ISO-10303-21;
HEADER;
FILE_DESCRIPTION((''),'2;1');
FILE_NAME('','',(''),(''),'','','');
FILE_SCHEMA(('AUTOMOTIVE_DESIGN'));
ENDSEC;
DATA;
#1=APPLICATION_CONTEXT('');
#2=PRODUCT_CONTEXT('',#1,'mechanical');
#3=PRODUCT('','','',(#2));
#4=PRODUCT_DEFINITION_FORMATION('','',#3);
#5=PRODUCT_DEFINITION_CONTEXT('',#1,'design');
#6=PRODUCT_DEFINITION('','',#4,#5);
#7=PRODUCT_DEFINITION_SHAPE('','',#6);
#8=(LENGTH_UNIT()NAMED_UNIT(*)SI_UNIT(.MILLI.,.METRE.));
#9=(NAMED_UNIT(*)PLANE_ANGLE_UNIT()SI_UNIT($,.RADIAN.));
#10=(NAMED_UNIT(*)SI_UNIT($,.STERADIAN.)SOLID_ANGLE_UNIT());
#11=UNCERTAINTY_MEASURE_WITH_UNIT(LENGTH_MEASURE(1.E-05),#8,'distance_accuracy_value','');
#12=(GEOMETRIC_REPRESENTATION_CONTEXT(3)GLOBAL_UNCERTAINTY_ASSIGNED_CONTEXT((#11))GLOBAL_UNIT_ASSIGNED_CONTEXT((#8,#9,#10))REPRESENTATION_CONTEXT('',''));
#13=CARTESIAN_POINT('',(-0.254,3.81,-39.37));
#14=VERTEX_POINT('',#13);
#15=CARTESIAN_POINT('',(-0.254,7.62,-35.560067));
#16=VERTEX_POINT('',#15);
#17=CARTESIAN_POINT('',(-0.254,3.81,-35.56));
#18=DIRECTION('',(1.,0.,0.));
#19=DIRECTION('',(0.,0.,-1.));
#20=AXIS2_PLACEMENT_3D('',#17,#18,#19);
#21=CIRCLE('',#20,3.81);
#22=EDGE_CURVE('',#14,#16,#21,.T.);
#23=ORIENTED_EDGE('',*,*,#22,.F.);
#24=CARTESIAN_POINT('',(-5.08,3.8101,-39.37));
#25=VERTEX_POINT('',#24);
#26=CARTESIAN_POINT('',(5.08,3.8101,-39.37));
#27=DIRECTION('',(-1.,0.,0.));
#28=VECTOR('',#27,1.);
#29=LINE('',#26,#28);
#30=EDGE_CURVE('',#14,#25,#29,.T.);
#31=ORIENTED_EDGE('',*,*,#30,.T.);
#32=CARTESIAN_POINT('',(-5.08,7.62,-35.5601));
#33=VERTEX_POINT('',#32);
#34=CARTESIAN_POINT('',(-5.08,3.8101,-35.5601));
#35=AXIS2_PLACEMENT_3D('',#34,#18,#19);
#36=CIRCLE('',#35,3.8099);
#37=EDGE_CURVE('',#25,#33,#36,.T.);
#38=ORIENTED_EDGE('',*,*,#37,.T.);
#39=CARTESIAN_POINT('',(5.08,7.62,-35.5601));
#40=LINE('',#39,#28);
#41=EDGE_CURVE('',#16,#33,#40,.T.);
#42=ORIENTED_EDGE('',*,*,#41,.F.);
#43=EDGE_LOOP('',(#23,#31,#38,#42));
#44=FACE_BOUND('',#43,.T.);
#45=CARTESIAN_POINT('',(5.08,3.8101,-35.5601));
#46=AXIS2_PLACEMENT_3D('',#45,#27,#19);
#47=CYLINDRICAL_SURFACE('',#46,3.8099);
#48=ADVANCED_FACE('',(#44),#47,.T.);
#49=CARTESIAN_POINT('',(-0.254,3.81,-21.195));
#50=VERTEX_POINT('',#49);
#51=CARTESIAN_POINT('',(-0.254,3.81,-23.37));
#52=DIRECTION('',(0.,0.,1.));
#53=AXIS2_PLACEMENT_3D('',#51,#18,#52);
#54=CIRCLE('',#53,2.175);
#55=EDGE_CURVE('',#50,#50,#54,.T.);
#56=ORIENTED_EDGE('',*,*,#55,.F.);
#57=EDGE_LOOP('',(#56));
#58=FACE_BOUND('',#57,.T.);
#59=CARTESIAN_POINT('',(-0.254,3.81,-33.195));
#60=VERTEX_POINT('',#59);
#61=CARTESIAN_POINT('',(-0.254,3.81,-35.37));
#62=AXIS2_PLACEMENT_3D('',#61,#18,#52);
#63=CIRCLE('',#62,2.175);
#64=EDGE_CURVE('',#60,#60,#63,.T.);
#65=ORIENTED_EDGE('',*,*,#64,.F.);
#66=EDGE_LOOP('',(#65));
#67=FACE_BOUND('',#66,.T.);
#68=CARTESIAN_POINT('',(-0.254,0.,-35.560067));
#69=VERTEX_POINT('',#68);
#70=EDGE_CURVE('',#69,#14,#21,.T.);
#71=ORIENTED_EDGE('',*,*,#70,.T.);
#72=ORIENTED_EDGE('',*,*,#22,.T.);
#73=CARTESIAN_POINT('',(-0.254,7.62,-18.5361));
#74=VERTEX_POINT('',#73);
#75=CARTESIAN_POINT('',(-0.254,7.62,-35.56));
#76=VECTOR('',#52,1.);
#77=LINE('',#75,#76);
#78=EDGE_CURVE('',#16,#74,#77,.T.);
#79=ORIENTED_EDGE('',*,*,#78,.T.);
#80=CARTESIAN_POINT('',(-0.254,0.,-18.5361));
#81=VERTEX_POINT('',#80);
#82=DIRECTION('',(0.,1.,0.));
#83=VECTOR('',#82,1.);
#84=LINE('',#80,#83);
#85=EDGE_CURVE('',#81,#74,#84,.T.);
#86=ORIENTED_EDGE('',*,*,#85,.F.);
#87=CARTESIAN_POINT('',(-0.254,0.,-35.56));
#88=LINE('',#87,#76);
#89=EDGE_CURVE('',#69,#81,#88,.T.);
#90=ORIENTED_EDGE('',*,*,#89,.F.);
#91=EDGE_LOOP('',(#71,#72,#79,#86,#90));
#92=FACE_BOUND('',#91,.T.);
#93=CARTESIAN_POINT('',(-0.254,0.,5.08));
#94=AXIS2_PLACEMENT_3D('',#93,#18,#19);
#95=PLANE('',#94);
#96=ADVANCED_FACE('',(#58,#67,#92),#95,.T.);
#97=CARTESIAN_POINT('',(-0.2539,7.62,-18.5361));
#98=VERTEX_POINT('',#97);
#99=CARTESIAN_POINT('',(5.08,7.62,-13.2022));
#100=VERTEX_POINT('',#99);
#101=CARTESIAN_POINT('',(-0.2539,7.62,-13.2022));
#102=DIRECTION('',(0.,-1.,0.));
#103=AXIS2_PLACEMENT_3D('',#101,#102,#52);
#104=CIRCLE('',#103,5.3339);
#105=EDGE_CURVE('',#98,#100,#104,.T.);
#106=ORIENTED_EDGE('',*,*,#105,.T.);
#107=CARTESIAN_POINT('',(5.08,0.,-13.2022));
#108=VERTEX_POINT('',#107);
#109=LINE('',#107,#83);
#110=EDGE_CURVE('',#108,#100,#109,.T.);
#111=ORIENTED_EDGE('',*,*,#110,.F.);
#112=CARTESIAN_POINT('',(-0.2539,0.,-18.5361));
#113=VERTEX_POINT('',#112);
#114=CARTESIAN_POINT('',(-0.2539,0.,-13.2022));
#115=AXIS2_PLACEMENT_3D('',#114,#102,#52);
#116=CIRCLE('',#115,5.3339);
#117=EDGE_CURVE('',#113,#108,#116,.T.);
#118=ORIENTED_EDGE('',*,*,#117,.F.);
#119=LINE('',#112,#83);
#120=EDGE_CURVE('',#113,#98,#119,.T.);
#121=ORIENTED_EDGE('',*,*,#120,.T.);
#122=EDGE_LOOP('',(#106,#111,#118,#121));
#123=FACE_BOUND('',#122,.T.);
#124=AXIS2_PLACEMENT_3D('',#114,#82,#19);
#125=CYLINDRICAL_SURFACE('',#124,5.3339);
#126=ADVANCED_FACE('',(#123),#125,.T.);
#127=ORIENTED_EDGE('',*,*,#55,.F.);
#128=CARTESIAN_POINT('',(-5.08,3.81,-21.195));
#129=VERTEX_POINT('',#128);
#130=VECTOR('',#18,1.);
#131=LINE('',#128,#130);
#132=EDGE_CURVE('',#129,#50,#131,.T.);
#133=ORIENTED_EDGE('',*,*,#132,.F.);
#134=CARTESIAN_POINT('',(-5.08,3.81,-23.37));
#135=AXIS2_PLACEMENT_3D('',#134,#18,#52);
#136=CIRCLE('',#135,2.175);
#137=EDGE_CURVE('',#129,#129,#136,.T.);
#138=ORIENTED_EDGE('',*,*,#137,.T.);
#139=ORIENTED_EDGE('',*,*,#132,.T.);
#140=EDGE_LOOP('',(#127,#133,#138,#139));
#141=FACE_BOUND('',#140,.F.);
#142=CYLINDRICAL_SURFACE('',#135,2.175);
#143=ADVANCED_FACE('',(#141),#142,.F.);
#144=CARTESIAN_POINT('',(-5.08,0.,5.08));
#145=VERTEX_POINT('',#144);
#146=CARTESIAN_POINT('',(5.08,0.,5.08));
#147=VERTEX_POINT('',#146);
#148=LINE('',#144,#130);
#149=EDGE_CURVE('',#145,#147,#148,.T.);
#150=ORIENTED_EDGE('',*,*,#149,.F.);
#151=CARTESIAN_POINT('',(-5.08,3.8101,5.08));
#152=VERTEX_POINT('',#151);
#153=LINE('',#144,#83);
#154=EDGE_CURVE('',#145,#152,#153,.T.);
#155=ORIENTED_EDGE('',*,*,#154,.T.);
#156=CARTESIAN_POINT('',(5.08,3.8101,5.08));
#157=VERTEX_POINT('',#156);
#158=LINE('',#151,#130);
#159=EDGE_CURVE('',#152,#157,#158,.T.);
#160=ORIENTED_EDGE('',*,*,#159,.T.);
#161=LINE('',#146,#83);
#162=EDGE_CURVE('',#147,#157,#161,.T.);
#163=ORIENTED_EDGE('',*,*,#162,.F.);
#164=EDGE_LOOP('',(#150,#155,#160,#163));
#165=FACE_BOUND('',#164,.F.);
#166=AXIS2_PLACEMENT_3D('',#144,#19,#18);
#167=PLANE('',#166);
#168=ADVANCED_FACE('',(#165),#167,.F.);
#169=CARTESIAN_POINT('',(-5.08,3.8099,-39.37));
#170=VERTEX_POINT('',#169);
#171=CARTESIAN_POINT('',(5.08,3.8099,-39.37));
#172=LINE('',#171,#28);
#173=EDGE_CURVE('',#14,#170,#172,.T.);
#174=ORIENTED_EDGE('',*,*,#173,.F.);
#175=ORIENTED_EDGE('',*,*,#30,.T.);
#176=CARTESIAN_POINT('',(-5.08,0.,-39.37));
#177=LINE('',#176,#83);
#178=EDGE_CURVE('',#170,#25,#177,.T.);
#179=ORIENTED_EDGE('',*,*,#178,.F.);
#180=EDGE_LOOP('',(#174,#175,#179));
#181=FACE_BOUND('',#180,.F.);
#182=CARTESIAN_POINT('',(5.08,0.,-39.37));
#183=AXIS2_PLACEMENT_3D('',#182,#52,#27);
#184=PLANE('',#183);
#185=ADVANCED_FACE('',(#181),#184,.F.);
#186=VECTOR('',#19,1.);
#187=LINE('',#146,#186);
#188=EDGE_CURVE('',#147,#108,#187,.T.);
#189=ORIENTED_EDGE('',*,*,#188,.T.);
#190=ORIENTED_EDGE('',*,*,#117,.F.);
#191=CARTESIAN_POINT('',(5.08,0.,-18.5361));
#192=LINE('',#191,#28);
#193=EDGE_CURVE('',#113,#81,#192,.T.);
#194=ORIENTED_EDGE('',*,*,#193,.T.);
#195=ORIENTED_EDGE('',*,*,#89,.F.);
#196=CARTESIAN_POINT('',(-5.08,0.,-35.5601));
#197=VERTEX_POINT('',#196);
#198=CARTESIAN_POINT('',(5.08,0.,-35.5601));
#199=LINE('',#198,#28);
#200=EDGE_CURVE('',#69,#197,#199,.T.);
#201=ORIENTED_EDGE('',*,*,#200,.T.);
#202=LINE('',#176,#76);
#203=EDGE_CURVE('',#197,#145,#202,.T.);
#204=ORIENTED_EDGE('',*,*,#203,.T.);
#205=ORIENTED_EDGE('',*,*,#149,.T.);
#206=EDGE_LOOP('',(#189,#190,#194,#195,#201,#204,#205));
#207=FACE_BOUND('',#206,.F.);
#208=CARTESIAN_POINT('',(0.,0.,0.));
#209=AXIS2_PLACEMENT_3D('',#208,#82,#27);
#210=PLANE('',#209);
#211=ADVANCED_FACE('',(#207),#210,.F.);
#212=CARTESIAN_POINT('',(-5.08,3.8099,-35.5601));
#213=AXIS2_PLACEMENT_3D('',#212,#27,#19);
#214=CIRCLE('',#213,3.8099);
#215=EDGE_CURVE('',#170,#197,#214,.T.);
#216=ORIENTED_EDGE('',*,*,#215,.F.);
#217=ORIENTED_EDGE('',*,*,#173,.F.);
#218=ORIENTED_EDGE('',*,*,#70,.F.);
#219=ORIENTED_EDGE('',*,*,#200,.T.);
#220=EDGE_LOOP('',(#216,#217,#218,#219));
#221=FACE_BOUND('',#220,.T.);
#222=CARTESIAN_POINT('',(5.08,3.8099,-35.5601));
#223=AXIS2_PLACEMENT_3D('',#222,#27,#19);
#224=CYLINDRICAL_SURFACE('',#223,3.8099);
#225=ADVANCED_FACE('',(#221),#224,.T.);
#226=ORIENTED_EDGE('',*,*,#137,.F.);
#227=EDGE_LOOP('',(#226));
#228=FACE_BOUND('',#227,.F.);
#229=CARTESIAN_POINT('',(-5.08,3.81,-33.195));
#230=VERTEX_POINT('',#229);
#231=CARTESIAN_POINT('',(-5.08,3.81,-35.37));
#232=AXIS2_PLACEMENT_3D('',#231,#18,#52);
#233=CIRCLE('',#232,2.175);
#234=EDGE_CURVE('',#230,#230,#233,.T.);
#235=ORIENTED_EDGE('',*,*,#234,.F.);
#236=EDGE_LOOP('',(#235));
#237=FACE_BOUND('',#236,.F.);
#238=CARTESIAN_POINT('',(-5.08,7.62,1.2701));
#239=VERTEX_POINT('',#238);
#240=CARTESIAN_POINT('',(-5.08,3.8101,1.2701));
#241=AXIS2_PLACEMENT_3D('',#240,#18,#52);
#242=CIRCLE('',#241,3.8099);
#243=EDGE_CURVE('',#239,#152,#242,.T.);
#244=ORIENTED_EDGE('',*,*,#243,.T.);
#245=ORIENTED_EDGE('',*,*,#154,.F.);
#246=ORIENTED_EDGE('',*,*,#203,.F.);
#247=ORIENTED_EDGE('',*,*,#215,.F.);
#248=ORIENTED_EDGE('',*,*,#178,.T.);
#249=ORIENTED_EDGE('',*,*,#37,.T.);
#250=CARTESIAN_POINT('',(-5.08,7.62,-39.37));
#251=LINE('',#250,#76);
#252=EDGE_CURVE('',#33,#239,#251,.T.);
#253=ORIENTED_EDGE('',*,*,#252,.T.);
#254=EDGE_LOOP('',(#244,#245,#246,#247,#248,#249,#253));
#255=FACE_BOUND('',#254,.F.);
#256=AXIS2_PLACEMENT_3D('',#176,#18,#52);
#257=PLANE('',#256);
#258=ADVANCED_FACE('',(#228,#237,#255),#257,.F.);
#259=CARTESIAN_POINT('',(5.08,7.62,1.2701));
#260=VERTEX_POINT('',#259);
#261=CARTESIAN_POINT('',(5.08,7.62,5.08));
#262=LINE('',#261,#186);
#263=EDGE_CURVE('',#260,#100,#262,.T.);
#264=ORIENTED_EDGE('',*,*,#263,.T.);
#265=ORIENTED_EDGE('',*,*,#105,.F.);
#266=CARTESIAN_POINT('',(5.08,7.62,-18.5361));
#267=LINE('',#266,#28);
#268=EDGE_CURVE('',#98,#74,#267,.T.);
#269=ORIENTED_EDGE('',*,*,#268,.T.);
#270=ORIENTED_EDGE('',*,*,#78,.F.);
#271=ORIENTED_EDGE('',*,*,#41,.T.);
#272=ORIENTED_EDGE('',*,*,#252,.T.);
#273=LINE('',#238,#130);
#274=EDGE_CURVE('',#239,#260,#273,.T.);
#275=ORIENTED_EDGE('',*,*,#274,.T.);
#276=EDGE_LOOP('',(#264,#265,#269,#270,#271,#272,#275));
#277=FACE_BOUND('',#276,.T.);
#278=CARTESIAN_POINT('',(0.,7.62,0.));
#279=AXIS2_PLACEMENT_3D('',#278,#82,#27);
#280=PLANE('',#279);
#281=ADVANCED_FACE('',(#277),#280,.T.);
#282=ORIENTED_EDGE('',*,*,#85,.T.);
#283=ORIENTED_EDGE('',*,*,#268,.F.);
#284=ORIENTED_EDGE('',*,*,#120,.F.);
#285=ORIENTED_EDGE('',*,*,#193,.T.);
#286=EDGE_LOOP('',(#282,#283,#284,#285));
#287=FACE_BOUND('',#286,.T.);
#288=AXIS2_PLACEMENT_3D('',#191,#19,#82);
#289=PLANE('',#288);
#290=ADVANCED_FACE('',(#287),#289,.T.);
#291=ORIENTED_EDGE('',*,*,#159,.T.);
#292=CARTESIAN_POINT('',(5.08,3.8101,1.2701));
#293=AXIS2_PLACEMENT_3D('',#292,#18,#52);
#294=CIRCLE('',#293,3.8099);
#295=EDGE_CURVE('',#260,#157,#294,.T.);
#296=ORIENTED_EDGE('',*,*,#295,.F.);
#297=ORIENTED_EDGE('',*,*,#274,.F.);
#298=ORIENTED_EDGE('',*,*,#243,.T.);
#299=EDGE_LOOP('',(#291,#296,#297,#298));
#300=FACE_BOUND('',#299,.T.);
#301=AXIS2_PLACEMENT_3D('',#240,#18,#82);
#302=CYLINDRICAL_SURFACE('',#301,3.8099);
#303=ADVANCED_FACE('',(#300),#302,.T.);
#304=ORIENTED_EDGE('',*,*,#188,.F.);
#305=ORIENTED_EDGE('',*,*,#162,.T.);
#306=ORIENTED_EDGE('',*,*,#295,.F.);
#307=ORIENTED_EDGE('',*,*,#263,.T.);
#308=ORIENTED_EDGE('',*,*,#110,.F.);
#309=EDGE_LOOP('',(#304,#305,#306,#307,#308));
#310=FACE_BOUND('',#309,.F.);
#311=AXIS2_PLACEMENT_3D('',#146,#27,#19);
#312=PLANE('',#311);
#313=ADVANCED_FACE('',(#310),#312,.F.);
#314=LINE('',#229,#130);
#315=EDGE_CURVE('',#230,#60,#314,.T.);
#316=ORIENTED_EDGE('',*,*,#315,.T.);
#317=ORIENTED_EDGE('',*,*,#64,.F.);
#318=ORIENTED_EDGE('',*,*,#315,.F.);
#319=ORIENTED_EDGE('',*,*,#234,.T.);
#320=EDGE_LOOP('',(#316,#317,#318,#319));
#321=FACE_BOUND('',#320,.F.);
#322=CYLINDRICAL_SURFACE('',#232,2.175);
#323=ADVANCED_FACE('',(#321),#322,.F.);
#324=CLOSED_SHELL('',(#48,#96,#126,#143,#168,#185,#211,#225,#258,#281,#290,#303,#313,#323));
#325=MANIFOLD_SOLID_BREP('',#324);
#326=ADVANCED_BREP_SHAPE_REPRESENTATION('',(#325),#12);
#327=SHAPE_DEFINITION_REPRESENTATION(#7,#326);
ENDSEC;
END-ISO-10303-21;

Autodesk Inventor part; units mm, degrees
ref_plane "YZ Plane" through (0, 0, 0) normal (1, 0, 0) x (0, 1, 0)
ref_plane "XZ Plane" through (0, 0, 0) normal (0, 1, 0) x (-1, 0, 0)
ref_plane "XY Plane" through (0, 0, 0) normal (0, 0, 1) x (1, 0, 0)
sketch "Block1" plane through (0, 0, 0) normal (0, 0, 1) x (1, 0, 0)
  circle A0 centre (40.64, 3.81) radius 3.81
  point P0 (32.0567, 3.81)
sketch "Sketch1" plane through (0, 0, 0) normal (0, 1, 0) x (-1, 0, 0)
  line L0 (5.08, 5.08) -> (-5.08, 5.08)
  line L1 (-5.08, 5.08) -> (-5.08, -39.37)
  line L2 (-5.08, -39.37) -> (5.08, -39.37)
  line L3 (5.08, -39.37) -> (5.08, 5.08)
  point P0 (0, 0)
  dimension "d0" = 10.16
  dimension "d1" = 44.45
extrude "bar" add sketch "Sketch1" along normal blind 7.62
sketch "Sketch2" plane through (-5.08, 0, -39.37) normal (-1, 0, 0) x (0, 0, 1)
  circle A0 centre (4, 3.81) radius 2.175
  circle A1 centre (16, 3.81) radius 2.175
  circle A2 centre (9.9822, 3.81) radius 1.0704
  point P0 (39.37, 0)
  dimension "d4" = 4.35
  dimension "d5" = 4.35
hole "pegholes" at (-5.08, 3.81, -35.37) at (-5.08, 3.81, -23.37) direction (1, 0, 0) diameter 4.35 end through all
fillet "Fillet3" radius 3.81 3 edges at (0, 7.62, -39.37) (0, 0, -39.37) (0, 7.62, 5.08)
sketch "Sketch3" plane through (5.08, 0, 5.08) normal (1, 0, 0) x (0, 0, -1)
  line L0 (40.64, 7.62) -> (3.81, 7.62) projected
  line L1 (23.6161, 7.62) -> (40.64, 7.62)
  line L2 (40.64, 7.62) -> (40.64, 0)
  line L3 (40.64, 0) -> (23.6161, 0)
  line L4 (23.6161, 0) -> (23.6161, 7.62)
  circle A0 centre (40.64, 3.81) radius 3.81
  point P0 (5.08, 0)
extrude "Extrusion2" cut sketch "Sketch3" against normal blind 5.334 contours A0 L2 | L2 A0
extrude "Extrusion3" cut sketch "Sketch3" against normal blind 5.334 contours A0 L3 L4 L0 | L2 A0 picked at (39.3793, 3.6569)
fillet "Fillet4" radius 5.334 1 edges at (5.08, 3.81, -18.5361)
properties part number "fire-bar"
